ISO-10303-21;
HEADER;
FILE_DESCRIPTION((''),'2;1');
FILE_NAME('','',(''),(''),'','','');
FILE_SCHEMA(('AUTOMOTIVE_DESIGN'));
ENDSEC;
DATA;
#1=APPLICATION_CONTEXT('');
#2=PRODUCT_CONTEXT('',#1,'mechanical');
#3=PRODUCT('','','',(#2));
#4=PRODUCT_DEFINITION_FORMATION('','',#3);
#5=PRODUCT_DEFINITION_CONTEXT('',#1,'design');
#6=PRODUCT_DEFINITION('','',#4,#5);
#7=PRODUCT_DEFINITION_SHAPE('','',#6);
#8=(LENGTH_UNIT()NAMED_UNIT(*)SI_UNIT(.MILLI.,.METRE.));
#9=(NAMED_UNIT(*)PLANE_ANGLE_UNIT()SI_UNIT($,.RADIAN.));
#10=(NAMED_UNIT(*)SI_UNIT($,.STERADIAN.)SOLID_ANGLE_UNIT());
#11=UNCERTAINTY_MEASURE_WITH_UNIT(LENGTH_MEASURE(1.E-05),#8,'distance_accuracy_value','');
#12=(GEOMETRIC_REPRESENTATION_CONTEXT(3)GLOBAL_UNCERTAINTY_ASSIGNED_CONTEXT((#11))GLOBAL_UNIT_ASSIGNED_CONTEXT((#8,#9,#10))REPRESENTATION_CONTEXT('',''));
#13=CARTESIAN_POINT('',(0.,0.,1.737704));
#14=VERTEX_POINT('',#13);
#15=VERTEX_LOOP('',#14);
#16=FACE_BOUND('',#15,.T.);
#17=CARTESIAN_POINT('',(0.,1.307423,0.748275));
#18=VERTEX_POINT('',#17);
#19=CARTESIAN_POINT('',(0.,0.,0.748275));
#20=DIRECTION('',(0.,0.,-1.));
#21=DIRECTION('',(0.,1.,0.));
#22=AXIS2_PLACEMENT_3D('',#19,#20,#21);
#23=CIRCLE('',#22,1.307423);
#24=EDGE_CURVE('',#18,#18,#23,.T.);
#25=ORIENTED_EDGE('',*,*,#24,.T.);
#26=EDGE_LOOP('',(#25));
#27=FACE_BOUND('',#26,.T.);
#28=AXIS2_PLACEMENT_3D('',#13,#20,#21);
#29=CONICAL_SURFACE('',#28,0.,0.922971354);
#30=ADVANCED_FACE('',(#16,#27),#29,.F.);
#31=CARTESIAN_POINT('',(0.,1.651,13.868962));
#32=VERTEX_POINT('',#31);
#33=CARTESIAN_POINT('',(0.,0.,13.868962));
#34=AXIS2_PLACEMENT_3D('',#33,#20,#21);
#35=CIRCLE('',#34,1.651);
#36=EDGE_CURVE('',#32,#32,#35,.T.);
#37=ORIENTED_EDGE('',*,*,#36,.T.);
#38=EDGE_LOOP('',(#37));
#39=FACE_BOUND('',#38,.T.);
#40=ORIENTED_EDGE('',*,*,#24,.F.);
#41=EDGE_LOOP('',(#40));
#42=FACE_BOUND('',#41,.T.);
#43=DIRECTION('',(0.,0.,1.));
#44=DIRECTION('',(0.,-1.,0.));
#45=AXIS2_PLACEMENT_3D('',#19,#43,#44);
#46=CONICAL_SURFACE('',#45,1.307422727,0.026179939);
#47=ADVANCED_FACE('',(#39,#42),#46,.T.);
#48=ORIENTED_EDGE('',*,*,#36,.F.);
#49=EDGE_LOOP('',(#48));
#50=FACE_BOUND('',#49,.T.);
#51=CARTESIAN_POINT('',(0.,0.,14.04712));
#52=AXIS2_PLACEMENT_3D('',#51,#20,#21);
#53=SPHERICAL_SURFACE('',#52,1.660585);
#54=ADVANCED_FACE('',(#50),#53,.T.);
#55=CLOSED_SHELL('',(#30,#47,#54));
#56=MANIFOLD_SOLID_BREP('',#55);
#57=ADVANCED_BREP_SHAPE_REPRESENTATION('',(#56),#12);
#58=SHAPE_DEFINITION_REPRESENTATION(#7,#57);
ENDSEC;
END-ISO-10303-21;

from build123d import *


# Read off the part's stored shape, not the designer's step: Surface-Imported1
with BuildPart() as part:
    # Sketch1 → Revolve1 (revolve)
    with BuildSketch(Plane(origin=(0, 0, 0), x_dir=(0, 0, -1), z_dir=(1, 0, 0))):
        with BuildLine():
            Line((-1.737704184, 0), (-15.707704184, 0))
            ThreePointArc((-15.707704184, 0), (-15.15655538, 1.235594348), (-13.868962067, 1.651))
            Line((-13.868962067, 1.651), (-0.748275349, 1.307422727))
            Line((-0.748275349, 1.307422727), (-1.737704184, 0))
        make_face()
    revolve(axis=Axis((0, 0, 1.737704184), (0, 0, 1)))


solid = part.part
